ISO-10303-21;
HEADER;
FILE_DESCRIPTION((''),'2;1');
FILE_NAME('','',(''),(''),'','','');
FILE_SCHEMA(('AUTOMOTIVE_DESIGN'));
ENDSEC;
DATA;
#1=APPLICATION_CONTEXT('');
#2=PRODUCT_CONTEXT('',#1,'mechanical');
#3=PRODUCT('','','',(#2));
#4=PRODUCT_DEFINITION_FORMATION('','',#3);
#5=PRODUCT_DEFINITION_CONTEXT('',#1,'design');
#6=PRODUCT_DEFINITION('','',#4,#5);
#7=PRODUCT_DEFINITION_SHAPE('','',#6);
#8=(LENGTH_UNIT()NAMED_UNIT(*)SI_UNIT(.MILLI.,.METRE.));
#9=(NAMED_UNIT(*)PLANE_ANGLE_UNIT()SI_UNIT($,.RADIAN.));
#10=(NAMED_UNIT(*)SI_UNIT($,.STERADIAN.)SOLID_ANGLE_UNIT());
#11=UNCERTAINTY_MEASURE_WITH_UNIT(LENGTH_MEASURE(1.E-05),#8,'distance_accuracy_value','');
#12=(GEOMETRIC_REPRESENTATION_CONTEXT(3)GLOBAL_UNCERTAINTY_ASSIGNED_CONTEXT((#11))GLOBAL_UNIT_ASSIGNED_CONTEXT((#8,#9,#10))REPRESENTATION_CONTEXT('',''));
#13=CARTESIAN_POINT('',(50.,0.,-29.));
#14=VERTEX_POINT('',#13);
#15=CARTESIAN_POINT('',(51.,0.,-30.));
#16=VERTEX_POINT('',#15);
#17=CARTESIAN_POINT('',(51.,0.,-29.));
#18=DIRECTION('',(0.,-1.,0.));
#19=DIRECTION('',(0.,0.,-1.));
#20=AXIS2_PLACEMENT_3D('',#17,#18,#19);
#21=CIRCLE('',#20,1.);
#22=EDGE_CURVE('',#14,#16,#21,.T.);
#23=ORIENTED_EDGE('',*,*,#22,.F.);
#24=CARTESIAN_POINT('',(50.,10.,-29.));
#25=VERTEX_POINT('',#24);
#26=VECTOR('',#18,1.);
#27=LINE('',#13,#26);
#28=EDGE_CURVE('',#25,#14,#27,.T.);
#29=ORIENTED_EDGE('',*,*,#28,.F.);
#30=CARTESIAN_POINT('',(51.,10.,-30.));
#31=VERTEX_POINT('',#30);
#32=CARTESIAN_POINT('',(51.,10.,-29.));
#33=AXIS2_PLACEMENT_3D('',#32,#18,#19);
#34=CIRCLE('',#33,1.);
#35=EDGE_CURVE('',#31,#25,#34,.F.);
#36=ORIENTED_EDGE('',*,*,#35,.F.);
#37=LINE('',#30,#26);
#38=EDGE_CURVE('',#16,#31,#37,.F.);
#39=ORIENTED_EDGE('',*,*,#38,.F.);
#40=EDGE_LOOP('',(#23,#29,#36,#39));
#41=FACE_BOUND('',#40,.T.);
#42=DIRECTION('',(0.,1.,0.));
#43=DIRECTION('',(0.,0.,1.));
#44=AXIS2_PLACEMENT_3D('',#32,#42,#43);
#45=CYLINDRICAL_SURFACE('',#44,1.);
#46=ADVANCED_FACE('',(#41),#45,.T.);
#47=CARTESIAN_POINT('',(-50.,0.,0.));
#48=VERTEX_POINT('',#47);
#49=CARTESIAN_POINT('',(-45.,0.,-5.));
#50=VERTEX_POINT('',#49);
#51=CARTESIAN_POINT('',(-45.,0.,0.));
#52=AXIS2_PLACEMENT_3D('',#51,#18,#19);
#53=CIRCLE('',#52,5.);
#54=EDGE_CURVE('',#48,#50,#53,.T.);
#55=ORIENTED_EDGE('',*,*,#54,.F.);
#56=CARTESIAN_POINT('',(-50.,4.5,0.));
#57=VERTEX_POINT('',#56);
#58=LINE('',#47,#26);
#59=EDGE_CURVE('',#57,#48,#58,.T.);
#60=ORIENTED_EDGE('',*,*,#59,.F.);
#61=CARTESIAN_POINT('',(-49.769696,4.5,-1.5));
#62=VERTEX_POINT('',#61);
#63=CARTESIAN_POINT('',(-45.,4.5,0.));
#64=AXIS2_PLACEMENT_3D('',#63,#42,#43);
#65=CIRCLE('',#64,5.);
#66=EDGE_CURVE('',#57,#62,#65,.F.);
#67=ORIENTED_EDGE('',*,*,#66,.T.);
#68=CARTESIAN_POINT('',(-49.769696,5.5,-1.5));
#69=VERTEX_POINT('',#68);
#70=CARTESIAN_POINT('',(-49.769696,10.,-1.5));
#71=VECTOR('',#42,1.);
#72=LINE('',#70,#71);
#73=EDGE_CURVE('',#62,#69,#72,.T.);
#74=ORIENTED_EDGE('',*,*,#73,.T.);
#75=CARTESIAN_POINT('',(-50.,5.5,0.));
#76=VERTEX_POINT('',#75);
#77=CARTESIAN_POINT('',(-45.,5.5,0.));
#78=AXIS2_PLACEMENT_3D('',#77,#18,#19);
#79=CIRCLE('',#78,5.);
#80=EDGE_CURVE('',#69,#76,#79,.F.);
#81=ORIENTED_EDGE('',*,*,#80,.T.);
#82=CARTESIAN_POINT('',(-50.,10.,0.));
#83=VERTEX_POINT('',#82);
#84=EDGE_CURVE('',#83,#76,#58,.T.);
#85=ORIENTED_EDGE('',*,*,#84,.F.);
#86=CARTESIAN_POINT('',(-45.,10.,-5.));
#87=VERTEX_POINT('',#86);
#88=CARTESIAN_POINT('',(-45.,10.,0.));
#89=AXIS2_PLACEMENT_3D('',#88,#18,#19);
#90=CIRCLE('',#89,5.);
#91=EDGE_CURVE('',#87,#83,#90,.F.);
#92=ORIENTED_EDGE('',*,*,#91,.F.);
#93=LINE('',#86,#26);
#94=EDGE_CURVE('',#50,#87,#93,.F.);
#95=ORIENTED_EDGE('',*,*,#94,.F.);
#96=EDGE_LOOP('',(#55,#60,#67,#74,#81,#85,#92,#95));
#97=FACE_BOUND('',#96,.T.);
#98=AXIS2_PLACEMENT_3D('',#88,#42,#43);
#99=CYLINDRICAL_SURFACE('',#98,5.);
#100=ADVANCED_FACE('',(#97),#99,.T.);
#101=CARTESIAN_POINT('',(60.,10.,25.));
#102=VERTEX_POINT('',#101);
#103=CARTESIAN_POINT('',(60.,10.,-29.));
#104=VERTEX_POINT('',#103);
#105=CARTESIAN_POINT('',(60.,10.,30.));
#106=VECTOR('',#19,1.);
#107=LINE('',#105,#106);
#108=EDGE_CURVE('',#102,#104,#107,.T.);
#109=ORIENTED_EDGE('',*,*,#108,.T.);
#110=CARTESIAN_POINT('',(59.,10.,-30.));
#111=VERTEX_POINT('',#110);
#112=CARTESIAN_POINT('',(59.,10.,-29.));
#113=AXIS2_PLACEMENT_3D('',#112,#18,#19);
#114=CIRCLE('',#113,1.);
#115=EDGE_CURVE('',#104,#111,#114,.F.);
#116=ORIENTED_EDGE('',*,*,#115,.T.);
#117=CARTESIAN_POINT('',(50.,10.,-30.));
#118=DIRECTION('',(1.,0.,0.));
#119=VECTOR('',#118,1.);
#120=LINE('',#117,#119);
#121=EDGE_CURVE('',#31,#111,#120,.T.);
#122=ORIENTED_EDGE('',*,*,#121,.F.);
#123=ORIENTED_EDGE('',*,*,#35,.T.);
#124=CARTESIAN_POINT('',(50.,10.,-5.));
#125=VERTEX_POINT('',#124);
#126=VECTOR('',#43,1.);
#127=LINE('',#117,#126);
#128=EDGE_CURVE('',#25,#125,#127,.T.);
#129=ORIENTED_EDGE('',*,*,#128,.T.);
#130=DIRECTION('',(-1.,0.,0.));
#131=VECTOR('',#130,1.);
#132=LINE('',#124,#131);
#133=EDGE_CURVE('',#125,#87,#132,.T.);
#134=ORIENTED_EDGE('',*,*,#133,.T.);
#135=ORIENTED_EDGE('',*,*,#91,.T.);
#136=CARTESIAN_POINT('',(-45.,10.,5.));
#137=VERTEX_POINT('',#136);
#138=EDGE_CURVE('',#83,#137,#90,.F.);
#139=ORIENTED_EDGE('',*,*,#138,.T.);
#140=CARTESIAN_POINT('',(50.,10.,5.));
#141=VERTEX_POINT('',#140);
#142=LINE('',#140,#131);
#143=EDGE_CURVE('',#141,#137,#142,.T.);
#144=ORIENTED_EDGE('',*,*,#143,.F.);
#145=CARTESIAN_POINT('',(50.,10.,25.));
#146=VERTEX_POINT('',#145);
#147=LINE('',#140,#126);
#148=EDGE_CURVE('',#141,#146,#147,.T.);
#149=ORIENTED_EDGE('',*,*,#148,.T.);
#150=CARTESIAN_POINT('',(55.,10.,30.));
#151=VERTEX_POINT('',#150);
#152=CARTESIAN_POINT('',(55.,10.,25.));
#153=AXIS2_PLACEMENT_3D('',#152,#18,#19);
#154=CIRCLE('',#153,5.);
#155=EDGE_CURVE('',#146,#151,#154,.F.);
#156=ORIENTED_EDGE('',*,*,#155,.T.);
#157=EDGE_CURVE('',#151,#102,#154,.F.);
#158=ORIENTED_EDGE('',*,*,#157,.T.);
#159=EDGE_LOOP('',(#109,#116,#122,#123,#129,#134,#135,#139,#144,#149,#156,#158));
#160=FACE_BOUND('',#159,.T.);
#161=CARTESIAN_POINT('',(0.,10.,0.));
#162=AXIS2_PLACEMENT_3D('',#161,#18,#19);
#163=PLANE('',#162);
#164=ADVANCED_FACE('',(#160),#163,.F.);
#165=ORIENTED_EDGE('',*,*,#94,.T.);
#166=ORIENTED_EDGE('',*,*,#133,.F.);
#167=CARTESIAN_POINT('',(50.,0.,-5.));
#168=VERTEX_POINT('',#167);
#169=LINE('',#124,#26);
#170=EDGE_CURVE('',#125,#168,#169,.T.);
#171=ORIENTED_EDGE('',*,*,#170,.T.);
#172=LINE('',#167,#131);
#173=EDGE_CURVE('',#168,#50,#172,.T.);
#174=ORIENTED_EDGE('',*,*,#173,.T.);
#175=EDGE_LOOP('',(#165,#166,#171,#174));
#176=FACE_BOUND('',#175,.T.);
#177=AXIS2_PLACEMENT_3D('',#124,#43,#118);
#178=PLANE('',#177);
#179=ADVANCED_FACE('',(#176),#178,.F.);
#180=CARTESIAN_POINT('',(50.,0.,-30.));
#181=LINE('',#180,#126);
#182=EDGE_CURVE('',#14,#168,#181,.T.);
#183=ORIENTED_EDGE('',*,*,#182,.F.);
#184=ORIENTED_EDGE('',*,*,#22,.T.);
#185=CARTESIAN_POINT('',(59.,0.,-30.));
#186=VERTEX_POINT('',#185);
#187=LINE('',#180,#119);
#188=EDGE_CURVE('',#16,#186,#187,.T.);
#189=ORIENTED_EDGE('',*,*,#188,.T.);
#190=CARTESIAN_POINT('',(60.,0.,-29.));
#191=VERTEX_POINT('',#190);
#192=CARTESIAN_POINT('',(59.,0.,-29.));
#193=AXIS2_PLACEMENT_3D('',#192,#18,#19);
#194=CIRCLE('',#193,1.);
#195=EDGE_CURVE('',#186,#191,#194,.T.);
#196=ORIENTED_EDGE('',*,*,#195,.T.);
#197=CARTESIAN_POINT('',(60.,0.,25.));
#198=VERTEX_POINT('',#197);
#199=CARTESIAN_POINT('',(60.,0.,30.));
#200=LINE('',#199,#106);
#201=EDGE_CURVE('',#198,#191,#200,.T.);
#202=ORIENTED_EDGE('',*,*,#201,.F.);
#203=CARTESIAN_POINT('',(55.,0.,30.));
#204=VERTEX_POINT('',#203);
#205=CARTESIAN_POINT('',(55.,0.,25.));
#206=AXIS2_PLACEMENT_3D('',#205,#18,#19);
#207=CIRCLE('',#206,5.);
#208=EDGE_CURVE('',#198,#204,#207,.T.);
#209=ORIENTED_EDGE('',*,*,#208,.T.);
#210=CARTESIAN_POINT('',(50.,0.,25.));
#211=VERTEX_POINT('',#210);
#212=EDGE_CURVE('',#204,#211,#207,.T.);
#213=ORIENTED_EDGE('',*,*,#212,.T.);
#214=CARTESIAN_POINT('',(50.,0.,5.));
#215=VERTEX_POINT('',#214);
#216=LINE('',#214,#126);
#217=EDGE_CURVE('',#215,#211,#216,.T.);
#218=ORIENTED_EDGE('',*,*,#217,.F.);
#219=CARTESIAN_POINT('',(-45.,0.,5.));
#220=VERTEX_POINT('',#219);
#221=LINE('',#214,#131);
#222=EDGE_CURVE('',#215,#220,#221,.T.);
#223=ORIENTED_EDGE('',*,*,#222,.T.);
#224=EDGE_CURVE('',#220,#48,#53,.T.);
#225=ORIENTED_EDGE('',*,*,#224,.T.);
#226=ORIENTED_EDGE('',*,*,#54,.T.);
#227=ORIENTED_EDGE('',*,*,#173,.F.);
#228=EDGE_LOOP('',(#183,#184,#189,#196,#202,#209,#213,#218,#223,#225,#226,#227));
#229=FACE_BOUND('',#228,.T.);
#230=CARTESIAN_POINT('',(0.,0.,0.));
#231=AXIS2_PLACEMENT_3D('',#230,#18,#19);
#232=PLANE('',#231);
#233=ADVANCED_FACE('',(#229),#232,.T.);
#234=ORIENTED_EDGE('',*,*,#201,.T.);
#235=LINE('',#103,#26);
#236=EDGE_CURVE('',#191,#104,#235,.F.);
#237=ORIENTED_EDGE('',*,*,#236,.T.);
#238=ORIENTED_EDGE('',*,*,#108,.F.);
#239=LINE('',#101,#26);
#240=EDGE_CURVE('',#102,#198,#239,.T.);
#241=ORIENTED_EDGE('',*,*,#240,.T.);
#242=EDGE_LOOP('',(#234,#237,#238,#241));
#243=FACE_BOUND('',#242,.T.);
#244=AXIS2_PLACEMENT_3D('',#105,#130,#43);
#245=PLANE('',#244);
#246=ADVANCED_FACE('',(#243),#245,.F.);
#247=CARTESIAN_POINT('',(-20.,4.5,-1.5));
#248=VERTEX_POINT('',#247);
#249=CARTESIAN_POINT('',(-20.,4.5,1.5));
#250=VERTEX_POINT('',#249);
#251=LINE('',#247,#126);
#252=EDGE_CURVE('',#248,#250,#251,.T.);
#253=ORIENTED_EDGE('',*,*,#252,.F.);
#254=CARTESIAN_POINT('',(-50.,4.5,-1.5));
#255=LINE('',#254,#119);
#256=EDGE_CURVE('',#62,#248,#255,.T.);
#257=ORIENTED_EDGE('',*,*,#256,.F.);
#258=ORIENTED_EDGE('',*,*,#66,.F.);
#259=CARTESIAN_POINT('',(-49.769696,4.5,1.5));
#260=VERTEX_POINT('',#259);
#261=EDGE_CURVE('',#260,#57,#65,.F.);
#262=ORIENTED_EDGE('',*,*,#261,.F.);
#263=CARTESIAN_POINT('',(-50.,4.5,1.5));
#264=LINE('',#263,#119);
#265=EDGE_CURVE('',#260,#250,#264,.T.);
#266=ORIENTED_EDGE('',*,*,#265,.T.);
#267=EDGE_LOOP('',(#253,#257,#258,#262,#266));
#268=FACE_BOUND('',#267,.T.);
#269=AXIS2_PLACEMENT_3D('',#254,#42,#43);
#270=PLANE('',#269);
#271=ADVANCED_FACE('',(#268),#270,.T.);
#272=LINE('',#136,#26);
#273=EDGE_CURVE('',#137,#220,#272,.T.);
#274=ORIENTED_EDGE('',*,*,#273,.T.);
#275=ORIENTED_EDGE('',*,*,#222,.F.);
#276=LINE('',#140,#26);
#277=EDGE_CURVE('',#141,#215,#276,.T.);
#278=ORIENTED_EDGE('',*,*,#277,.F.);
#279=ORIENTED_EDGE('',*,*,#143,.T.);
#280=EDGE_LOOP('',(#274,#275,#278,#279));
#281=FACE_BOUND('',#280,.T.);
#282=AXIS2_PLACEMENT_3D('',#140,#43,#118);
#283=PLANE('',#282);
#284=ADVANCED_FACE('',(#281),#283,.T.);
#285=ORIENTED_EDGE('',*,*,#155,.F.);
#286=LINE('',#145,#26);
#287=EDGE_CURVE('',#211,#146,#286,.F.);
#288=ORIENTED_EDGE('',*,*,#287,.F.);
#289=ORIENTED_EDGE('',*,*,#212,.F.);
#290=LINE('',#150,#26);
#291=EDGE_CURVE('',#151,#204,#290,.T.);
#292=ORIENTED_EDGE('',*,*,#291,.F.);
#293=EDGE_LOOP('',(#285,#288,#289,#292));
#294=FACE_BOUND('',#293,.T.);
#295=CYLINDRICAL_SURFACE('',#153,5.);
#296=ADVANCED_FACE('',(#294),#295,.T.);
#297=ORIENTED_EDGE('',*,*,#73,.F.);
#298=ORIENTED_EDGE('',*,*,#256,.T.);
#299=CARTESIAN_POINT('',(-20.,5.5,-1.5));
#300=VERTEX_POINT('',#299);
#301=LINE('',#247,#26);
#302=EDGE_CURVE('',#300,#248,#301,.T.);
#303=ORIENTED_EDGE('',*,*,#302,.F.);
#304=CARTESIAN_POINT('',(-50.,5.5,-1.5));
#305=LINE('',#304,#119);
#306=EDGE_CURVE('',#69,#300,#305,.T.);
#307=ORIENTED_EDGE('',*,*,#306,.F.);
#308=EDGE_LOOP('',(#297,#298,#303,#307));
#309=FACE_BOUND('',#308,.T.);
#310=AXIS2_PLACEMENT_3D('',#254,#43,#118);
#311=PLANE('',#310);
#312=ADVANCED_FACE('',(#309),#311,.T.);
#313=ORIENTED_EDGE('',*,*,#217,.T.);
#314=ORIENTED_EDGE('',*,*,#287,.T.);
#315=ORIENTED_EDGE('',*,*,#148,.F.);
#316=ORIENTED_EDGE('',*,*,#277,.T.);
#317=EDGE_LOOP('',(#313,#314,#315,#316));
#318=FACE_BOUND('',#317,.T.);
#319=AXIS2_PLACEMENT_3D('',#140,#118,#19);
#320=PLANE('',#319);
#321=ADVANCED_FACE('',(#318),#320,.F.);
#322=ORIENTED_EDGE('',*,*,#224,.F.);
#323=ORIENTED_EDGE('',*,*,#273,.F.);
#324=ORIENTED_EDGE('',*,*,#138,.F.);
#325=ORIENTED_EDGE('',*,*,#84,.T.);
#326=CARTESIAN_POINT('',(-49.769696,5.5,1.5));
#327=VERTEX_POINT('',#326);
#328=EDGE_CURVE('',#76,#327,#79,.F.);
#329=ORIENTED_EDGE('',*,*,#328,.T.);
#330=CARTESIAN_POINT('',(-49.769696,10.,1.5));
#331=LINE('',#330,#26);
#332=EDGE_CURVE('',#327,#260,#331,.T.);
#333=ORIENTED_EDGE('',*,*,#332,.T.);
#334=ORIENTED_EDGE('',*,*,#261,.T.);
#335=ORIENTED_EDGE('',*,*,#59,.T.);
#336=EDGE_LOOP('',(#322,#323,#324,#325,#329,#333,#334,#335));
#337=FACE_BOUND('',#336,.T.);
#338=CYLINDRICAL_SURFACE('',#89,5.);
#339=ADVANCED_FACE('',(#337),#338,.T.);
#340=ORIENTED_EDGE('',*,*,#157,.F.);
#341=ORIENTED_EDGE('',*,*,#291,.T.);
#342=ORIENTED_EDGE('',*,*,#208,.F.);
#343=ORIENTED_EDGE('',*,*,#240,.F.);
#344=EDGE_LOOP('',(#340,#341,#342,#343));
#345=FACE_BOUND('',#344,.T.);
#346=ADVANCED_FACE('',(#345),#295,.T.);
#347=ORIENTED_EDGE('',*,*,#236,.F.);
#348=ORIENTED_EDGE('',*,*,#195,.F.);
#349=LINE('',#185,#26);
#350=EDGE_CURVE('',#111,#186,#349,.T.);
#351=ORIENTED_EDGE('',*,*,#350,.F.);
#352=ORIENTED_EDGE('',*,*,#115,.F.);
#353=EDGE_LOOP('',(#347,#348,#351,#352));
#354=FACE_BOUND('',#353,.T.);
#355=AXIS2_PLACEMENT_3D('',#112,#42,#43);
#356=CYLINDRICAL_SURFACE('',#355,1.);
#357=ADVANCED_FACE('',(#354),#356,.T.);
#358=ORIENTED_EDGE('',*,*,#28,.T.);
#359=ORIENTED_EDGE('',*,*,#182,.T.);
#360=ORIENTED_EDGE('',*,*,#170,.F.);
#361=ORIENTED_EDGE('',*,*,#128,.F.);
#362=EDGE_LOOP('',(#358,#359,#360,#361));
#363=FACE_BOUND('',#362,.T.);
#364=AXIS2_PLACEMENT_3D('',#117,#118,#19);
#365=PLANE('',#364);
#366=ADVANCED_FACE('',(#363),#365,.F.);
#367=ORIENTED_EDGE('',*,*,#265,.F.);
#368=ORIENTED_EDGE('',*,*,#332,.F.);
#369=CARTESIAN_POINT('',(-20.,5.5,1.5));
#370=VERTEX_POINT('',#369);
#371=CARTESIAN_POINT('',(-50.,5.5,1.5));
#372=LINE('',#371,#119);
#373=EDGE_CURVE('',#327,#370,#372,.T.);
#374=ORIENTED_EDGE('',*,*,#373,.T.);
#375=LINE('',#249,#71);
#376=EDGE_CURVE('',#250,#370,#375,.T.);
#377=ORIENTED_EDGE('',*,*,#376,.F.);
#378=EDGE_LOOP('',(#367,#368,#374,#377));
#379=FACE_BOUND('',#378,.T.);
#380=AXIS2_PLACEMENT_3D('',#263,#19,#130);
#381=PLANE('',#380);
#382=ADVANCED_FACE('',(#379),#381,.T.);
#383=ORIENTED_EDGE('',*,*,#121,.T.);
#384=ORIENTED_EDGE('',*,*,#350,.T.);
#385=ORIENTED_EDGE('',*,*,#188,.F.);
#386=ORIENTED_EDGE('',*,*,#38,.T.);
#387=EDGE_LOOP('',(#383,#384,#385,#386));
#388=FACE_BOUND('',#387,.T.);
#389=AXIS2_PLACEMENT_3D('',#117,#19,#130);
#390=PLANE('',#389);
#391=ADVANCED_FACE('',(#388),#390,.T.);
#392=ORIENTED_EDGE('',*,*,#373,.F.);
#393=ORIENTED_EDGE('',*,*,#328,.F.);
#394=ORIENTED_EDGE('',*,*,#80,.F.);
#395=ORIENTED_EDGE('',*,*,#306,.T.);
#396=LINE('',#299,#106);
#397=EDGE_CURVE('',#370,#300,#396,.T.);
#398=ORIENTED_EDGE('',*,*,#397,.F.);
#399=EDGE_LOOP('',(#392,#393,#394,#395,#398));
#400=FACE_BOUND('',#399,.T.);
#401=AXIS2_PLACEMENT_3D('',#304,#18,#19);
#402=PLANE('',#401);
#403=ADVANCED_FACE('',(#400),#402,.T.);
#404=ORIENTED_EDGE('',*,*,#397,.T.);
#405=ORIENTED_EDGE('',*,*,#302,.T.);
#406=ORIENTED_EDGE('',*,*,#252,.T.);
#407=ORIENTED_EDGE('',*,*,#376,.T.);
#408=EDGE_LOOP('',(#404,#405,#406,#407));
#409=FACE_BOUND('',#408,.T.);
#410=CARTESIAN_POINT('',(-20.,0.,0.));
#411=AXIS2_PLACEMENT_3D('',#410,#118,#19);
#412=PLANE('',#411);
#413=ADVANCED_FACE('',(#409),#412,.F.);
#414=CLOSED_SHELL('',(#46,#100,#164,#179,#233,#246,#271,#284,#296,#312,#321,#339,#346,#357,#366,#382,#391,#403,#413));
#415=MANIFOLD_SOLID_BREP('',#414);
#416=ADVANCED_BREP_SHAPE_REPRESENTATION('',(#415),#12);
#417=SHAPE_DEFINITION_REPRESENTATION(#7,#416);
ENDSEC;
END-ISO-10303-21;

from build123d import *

# Parameters (mm, degrees)
BOSS_EXTRU_1_DEPTH      = 10
CONG_3_R                = 5
CONG_4_R                = 5
CONG_5_R                = 1
CONG_6_R                = 1
ENL_V_MAT_EXTRU_1_DEPTH = 30


with BuildPart() as part:
    # Esquisse1 → Boss.-Extru.1 (new body)
    with BuildSketch(Plane(origin=(0, 0, 0), x_dir=(1, 0, 0), z_dir=(0, 1, 0))):
        Polygon((50, 30), (50, 5), (-50, 5), (-50, -5), (50, -5), (50, -30), (60, -30), (60, 30), align=None)
    extrude(amount=BOSS_EXTRU_1_DEPTH)

    # Congé3
    cong_3_edges = [part.edges().sort_by_distance(p)[0] for p in [
        (60, 5, 30),
        (50, 5, 30),
    ]]
    fillet(cong_3_edges, radius=CONG_3_R - 0.0001)  # a hair under: the kernel refuses the full size

    # Congé4
    cong_4_edges = [part.edges().sort_by_distance(p)[0] for p in [
        (-50, 5, 5),
        (-50, 5, -5),
    ]]
    fillet(cong_4_edges, radius=CONG_4_R - 0.0001)  # a hair under: the kernel refuses the full size

    # Congé5
    cong_5_edges = [part.edges().sort_by_distance(p)[0] for p in [
        (50, 5, -30),
    ]]
    fillet(cong_5_edges, radius=CONG_5_R)

    # Congé6
    cong_6_edges = [part.edges().sort_by_distance(p)[0] for p in [
        (60, 5, -30),
    ]]
    fillet(cong_6_edges, radius=CONG_6_R)

    # Esquisse3D1 → Enlèv. mat.-Extru.1 (cut)
    with BuildSketch(Plane(origin=(-50, 4.5, -1.5), x_dir=(0, 0.3162277660168382, 0.9486832980505138), z_dir=(-1, 0, 0))):
        Polygon((0, 0), (2.846049894, -0.948683298), (3.16227766, 0), (0.316227766, 0.948683298), align=None)
    extrude(amount=-ENL_V_MAT_EXTRU_1_DEPTH, mode=Mode.SUBTRACT)


solid = part.part
